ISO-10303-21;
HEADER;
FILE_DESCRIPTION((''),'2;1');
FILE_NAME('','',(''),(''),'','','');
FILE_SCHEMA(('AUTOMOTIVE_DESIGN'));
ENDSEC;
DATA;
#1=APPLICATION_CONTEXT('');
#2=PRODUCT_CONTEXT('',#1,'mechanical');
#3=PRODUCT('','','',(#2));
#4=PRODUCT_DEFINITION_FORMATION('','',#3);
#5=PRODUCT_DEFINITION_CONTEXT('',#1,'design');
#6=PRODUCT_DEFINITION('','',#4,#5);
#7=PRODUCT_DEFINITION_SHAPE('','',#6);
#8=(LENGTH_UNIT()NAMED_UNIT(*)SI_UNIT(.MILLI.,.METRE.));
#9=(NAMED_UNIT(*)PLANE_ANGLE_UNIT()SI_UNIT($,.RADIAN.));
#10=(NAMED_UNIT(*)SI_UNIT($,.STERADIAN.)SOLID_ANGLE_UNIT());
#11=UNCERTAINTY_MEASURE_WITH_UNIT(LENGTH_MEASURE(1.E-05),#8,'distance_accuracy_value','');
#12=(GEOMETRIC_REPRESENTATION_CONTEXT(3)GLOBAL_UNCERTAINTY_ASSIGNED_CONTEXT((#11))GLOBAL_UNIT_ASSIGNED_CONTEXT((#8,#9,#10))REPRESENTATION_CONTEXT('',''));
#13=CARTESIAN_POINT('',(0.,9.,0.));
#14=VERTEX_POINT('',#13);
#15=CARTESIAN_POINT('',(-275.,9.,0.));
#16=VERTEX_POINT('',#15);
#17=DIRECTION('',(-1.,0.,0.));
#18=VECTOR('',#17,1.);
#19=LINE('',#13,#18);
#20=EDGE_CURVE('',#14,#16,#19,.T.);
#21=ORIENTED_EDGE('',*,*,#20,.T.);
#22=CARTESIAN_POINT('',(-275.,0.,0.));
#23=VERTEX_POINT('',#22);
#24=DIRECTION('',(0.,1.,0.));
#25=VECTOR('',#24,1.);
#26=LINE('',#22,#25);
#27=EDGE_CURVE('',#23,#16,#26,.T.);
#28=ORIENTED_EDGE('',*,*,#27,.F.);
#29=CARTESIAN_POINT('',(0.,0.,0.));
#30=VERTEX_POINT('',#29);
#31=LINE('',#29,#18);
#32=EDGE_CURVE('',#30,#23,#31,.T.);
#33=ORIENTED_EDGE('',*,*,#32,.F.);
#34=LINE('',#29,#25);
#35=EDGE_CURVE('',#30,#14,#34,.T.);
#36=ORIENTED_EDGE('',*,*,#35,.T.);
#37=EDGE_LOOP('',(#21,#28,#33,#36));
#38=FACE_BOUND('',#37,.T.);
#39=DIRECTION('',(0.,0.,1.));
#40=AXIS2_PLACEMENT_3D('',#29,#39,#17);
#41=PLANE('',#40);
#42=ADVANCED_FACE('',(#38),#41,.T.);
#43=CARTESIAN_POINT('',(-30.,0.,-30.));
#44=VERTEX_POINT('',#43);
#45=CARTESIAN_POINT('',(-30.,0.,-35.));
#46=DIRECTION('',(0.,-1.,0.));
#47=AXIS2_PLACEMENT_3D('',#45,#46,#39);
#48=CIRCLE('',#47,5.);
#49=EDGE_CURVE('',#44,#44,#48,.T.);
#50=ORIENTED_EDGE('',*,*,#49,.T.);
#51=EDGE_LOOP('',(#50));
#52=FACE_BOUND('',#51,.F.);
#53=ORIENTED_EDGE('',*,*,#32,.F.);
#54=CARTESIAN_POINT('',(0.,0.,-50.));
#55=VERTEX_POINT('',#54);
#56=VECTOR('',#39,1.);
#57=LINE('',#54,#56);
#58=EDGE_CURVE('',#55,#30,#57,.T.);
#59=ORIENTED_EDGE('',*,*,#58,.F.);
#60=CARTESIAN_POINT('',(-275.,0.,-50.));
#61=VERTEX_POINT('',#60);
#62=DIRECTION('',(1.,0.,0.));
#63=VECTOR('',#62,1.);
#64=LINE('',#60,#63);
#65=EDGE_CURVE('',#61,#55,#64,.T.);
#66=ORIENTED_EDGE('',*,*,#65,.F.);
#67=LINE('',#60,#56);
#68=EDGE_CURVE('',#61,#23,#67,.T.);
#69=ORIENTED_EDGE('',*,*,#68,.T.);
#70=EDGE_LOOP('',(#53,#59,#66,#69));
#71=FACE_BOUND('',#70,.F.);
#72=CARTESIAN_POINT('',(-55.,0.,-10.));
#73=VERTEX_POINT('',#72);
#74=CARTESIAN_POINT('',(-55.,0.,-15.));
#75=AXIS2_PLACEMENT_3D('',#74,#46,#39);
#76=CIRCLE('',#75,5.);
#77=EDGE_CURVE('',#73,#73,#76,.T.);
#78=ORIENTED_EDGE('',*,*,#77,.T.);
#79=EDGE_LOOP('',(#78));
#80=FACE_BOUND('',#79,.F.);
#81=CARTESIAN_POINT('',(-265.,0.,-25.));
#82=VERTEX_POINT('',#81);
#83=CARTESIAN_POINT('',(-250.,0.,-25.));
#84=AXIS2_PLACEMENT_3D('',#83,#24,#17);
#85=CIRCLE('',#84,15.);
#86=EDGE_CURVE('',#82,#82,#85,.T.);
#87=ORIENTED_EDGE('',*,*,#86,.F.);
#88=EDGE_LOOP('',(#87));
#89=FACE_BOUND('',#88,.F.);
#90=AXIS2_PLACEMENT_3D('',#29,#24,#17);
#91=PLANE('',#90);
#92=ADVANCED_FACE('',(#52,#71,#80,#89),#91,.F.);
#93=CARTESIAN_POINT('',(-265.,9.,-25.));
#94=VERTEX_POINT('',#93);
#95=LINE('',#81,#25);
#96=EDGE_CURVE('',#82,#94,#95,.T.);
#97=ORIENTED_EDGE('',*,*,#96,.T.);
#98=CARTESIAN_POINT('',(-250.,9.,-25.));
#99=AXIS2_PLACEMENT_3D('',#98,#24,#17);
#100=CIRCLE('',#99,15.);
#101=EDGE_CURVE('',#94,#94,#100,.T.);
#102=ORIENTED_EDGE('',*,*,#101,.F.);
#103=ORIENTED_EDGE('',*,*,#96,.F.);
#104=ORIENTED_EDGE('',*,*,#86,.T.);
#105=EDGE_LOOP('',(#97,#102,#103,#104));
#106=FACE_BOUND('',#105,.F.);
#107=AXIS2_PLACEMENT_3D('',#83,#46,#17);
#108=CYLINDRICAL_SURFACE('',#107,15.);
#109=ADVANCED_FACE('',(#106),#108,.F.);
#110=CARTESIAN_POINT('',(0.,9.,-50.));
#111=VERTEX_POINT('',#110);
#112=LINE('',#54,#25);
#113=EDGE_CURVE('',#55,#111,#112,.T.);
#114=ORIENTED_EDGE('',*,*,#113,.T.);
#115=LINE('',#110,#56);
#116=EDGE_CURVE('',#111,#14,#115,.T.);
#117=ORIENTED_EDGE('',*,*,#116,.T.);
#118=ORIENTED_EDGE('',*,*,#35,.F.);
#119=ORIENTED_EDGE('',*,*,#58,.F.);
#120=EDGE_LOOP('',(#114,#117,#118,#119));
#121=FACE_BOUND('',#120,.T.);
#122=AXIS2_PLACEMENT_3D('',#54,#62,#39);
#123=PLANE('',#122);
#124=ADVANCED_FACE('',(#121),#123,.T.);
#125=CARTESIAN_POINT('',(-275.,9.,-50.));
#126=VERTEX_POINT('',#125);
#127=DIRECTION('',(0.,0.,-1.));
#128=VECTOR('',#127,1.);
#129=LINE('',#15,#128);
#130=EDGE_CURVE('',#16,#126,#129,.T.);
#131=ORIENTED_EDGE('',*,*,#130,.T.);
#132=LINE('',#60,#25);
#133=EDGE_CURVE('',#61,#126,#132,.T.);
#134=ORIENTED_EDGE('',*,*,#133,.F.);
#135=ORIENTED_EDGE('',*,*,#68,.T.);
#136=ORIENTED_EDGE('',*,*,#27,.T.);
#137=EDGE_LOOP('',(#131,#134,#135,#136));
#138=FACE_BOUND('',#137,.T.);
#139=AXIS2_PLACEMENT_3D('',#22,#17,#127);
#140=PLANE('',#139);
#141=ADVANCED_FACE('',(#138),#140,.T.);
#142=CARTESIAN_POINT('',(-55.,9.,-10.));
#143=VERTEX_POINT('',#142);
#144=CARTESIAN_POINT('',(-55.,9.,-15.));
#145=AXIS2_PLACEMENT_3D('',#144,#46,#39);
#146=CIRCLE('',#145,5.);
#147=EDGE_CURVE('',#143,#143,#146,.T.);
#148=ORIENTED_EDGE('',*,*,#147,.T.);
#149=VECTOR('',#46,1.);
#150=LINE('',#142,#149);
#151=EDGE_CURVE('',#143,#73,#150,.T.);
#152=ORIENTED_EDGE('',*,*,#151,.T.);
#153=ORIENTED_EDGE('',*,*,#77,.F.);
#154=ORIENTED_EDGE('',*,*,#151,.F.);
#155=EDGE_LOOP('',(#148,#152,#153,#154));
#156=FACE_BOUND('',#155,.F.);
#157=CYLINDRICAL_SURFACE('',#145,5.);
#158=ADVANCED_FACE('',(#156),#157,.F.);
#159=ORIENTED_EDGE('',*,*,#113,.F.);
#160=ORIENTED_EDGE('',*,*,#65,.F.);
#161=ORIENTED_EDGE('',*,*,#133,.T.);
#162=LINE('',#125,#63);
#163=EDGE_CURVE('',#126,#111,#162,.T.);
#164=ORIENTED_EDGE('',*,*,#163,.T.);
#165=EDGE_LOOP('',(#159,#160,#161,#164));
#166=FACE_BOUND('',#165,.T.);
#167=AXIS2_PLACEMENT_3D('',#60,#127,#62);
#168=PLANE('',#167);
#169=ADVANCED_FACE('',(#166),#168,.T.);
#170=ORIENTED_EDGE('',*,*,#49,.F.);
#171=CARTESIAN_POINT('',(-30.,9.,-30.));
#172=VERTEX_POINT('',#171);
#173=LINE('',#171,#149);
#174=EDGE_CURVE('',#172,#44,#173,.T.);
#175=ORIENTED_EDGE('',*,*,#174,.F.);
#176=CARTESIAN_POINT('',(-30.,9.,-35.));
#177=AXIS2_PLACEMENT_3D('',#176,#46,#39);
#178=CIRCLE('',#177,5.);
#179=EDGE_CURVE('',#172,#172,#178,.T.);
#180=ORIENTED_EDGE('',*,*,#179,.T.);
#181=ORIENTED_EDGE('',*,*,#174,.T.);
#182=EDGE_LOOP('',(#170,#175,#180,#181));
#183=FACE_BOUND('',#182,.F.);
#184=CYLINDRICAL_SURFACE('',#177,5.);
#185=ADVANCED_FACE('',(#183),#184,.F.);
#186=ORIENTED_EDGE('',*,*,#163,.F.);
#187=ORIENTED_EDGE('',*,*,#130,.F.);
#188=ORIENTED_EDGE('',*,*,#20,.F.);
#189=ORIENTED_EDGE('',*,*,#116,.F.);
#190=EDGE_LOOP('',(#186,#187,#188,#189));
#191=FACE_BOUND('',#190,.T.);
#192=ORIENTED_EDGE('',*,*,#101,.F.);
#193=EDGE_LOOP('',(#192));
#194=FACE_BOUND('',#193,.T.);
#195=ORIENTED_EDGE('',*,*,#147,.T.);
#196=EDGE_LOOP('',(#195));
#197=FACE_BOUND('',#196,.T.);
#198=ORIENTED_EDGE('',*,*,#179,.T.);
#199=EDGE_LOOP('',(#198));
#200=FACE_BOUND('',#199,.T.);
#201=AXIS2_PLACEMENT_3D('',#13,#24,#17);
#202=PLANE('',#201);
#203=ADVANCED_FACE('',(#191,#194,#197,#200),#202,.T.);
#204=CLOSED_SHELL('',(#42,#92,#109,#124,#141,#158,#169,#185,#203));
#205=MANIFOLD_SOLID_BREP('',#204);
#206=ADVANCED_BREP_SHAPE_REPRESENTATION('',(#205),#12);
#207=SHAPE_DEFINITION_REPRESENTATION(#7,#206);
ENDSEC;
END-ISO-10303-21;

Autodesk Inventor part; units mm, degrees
ref_plane "YZ Plane" through (0, 0, 0) normal (1, 0, 0) x (0, 1, 0)
ref_plane "XZ Plane" through (0, 0, 0) normal (0, 1, 0) x (-1, 0, 0)
ref_plane "XY Plane" through (0, 0, 0) normal (0, 0, 1) x (1, 0, 0)
sketch "Skizze1" plane through (0, 0, 0) normal (0, 1, 0) x (-1, 0, 0)
  line L0 (0, 0) -> (275, 0)
  line L1 (275, 0) -> (275, -50)
  line L2 (275, -50) -> (0, -50)
  line L3 (0, -50) -> (0, 0)
  line L4 (275, 0) -> (275, -25)
  line L5 (275, -25) -> (250, -25)
  circle A0 centre (250, -25) radius 15
  dimension "d0" = 275
  dimension "d1" = 50
  dimension "d2" = 25
  dimension "d3" = 30
extrude "Extrusion1" add sketch "Skizze1" along normal blind 9
sketch "Skizze2" plane through (0, 9, 0) normal (0, 1, 0) x (1, 0, 0)
  line L0 (0, 0) -> (0, 50) projected
  line L1 (0, 50) -> (-30, 50)
  line L2 (-30, 50) -> (-30, 35)
  line L3 (0, 0) -> (-55, 0)
  line L4 (-275, 0) -> (0, 0) projected
  line L5 (-55, 0) -> (-70, 0)
  line L6 (-70, 0) -> (-55, 0)
  line L7 (-55, 0) -> (-55, 15)
  dimension "d6" = 30
  dimension "d7" = 15
  dimension "d8" = 55
  dimension "d9" = 15
  dimension "d10" = 15
hole "Bohrung1" at (-55, 9, -15) at (-30, 9, -35) direction (0, -1, 0) diameter 10 depth 10 tip angle 118
properties part number "Lagerstuetze_kurz" material "Holz (Birke)"
